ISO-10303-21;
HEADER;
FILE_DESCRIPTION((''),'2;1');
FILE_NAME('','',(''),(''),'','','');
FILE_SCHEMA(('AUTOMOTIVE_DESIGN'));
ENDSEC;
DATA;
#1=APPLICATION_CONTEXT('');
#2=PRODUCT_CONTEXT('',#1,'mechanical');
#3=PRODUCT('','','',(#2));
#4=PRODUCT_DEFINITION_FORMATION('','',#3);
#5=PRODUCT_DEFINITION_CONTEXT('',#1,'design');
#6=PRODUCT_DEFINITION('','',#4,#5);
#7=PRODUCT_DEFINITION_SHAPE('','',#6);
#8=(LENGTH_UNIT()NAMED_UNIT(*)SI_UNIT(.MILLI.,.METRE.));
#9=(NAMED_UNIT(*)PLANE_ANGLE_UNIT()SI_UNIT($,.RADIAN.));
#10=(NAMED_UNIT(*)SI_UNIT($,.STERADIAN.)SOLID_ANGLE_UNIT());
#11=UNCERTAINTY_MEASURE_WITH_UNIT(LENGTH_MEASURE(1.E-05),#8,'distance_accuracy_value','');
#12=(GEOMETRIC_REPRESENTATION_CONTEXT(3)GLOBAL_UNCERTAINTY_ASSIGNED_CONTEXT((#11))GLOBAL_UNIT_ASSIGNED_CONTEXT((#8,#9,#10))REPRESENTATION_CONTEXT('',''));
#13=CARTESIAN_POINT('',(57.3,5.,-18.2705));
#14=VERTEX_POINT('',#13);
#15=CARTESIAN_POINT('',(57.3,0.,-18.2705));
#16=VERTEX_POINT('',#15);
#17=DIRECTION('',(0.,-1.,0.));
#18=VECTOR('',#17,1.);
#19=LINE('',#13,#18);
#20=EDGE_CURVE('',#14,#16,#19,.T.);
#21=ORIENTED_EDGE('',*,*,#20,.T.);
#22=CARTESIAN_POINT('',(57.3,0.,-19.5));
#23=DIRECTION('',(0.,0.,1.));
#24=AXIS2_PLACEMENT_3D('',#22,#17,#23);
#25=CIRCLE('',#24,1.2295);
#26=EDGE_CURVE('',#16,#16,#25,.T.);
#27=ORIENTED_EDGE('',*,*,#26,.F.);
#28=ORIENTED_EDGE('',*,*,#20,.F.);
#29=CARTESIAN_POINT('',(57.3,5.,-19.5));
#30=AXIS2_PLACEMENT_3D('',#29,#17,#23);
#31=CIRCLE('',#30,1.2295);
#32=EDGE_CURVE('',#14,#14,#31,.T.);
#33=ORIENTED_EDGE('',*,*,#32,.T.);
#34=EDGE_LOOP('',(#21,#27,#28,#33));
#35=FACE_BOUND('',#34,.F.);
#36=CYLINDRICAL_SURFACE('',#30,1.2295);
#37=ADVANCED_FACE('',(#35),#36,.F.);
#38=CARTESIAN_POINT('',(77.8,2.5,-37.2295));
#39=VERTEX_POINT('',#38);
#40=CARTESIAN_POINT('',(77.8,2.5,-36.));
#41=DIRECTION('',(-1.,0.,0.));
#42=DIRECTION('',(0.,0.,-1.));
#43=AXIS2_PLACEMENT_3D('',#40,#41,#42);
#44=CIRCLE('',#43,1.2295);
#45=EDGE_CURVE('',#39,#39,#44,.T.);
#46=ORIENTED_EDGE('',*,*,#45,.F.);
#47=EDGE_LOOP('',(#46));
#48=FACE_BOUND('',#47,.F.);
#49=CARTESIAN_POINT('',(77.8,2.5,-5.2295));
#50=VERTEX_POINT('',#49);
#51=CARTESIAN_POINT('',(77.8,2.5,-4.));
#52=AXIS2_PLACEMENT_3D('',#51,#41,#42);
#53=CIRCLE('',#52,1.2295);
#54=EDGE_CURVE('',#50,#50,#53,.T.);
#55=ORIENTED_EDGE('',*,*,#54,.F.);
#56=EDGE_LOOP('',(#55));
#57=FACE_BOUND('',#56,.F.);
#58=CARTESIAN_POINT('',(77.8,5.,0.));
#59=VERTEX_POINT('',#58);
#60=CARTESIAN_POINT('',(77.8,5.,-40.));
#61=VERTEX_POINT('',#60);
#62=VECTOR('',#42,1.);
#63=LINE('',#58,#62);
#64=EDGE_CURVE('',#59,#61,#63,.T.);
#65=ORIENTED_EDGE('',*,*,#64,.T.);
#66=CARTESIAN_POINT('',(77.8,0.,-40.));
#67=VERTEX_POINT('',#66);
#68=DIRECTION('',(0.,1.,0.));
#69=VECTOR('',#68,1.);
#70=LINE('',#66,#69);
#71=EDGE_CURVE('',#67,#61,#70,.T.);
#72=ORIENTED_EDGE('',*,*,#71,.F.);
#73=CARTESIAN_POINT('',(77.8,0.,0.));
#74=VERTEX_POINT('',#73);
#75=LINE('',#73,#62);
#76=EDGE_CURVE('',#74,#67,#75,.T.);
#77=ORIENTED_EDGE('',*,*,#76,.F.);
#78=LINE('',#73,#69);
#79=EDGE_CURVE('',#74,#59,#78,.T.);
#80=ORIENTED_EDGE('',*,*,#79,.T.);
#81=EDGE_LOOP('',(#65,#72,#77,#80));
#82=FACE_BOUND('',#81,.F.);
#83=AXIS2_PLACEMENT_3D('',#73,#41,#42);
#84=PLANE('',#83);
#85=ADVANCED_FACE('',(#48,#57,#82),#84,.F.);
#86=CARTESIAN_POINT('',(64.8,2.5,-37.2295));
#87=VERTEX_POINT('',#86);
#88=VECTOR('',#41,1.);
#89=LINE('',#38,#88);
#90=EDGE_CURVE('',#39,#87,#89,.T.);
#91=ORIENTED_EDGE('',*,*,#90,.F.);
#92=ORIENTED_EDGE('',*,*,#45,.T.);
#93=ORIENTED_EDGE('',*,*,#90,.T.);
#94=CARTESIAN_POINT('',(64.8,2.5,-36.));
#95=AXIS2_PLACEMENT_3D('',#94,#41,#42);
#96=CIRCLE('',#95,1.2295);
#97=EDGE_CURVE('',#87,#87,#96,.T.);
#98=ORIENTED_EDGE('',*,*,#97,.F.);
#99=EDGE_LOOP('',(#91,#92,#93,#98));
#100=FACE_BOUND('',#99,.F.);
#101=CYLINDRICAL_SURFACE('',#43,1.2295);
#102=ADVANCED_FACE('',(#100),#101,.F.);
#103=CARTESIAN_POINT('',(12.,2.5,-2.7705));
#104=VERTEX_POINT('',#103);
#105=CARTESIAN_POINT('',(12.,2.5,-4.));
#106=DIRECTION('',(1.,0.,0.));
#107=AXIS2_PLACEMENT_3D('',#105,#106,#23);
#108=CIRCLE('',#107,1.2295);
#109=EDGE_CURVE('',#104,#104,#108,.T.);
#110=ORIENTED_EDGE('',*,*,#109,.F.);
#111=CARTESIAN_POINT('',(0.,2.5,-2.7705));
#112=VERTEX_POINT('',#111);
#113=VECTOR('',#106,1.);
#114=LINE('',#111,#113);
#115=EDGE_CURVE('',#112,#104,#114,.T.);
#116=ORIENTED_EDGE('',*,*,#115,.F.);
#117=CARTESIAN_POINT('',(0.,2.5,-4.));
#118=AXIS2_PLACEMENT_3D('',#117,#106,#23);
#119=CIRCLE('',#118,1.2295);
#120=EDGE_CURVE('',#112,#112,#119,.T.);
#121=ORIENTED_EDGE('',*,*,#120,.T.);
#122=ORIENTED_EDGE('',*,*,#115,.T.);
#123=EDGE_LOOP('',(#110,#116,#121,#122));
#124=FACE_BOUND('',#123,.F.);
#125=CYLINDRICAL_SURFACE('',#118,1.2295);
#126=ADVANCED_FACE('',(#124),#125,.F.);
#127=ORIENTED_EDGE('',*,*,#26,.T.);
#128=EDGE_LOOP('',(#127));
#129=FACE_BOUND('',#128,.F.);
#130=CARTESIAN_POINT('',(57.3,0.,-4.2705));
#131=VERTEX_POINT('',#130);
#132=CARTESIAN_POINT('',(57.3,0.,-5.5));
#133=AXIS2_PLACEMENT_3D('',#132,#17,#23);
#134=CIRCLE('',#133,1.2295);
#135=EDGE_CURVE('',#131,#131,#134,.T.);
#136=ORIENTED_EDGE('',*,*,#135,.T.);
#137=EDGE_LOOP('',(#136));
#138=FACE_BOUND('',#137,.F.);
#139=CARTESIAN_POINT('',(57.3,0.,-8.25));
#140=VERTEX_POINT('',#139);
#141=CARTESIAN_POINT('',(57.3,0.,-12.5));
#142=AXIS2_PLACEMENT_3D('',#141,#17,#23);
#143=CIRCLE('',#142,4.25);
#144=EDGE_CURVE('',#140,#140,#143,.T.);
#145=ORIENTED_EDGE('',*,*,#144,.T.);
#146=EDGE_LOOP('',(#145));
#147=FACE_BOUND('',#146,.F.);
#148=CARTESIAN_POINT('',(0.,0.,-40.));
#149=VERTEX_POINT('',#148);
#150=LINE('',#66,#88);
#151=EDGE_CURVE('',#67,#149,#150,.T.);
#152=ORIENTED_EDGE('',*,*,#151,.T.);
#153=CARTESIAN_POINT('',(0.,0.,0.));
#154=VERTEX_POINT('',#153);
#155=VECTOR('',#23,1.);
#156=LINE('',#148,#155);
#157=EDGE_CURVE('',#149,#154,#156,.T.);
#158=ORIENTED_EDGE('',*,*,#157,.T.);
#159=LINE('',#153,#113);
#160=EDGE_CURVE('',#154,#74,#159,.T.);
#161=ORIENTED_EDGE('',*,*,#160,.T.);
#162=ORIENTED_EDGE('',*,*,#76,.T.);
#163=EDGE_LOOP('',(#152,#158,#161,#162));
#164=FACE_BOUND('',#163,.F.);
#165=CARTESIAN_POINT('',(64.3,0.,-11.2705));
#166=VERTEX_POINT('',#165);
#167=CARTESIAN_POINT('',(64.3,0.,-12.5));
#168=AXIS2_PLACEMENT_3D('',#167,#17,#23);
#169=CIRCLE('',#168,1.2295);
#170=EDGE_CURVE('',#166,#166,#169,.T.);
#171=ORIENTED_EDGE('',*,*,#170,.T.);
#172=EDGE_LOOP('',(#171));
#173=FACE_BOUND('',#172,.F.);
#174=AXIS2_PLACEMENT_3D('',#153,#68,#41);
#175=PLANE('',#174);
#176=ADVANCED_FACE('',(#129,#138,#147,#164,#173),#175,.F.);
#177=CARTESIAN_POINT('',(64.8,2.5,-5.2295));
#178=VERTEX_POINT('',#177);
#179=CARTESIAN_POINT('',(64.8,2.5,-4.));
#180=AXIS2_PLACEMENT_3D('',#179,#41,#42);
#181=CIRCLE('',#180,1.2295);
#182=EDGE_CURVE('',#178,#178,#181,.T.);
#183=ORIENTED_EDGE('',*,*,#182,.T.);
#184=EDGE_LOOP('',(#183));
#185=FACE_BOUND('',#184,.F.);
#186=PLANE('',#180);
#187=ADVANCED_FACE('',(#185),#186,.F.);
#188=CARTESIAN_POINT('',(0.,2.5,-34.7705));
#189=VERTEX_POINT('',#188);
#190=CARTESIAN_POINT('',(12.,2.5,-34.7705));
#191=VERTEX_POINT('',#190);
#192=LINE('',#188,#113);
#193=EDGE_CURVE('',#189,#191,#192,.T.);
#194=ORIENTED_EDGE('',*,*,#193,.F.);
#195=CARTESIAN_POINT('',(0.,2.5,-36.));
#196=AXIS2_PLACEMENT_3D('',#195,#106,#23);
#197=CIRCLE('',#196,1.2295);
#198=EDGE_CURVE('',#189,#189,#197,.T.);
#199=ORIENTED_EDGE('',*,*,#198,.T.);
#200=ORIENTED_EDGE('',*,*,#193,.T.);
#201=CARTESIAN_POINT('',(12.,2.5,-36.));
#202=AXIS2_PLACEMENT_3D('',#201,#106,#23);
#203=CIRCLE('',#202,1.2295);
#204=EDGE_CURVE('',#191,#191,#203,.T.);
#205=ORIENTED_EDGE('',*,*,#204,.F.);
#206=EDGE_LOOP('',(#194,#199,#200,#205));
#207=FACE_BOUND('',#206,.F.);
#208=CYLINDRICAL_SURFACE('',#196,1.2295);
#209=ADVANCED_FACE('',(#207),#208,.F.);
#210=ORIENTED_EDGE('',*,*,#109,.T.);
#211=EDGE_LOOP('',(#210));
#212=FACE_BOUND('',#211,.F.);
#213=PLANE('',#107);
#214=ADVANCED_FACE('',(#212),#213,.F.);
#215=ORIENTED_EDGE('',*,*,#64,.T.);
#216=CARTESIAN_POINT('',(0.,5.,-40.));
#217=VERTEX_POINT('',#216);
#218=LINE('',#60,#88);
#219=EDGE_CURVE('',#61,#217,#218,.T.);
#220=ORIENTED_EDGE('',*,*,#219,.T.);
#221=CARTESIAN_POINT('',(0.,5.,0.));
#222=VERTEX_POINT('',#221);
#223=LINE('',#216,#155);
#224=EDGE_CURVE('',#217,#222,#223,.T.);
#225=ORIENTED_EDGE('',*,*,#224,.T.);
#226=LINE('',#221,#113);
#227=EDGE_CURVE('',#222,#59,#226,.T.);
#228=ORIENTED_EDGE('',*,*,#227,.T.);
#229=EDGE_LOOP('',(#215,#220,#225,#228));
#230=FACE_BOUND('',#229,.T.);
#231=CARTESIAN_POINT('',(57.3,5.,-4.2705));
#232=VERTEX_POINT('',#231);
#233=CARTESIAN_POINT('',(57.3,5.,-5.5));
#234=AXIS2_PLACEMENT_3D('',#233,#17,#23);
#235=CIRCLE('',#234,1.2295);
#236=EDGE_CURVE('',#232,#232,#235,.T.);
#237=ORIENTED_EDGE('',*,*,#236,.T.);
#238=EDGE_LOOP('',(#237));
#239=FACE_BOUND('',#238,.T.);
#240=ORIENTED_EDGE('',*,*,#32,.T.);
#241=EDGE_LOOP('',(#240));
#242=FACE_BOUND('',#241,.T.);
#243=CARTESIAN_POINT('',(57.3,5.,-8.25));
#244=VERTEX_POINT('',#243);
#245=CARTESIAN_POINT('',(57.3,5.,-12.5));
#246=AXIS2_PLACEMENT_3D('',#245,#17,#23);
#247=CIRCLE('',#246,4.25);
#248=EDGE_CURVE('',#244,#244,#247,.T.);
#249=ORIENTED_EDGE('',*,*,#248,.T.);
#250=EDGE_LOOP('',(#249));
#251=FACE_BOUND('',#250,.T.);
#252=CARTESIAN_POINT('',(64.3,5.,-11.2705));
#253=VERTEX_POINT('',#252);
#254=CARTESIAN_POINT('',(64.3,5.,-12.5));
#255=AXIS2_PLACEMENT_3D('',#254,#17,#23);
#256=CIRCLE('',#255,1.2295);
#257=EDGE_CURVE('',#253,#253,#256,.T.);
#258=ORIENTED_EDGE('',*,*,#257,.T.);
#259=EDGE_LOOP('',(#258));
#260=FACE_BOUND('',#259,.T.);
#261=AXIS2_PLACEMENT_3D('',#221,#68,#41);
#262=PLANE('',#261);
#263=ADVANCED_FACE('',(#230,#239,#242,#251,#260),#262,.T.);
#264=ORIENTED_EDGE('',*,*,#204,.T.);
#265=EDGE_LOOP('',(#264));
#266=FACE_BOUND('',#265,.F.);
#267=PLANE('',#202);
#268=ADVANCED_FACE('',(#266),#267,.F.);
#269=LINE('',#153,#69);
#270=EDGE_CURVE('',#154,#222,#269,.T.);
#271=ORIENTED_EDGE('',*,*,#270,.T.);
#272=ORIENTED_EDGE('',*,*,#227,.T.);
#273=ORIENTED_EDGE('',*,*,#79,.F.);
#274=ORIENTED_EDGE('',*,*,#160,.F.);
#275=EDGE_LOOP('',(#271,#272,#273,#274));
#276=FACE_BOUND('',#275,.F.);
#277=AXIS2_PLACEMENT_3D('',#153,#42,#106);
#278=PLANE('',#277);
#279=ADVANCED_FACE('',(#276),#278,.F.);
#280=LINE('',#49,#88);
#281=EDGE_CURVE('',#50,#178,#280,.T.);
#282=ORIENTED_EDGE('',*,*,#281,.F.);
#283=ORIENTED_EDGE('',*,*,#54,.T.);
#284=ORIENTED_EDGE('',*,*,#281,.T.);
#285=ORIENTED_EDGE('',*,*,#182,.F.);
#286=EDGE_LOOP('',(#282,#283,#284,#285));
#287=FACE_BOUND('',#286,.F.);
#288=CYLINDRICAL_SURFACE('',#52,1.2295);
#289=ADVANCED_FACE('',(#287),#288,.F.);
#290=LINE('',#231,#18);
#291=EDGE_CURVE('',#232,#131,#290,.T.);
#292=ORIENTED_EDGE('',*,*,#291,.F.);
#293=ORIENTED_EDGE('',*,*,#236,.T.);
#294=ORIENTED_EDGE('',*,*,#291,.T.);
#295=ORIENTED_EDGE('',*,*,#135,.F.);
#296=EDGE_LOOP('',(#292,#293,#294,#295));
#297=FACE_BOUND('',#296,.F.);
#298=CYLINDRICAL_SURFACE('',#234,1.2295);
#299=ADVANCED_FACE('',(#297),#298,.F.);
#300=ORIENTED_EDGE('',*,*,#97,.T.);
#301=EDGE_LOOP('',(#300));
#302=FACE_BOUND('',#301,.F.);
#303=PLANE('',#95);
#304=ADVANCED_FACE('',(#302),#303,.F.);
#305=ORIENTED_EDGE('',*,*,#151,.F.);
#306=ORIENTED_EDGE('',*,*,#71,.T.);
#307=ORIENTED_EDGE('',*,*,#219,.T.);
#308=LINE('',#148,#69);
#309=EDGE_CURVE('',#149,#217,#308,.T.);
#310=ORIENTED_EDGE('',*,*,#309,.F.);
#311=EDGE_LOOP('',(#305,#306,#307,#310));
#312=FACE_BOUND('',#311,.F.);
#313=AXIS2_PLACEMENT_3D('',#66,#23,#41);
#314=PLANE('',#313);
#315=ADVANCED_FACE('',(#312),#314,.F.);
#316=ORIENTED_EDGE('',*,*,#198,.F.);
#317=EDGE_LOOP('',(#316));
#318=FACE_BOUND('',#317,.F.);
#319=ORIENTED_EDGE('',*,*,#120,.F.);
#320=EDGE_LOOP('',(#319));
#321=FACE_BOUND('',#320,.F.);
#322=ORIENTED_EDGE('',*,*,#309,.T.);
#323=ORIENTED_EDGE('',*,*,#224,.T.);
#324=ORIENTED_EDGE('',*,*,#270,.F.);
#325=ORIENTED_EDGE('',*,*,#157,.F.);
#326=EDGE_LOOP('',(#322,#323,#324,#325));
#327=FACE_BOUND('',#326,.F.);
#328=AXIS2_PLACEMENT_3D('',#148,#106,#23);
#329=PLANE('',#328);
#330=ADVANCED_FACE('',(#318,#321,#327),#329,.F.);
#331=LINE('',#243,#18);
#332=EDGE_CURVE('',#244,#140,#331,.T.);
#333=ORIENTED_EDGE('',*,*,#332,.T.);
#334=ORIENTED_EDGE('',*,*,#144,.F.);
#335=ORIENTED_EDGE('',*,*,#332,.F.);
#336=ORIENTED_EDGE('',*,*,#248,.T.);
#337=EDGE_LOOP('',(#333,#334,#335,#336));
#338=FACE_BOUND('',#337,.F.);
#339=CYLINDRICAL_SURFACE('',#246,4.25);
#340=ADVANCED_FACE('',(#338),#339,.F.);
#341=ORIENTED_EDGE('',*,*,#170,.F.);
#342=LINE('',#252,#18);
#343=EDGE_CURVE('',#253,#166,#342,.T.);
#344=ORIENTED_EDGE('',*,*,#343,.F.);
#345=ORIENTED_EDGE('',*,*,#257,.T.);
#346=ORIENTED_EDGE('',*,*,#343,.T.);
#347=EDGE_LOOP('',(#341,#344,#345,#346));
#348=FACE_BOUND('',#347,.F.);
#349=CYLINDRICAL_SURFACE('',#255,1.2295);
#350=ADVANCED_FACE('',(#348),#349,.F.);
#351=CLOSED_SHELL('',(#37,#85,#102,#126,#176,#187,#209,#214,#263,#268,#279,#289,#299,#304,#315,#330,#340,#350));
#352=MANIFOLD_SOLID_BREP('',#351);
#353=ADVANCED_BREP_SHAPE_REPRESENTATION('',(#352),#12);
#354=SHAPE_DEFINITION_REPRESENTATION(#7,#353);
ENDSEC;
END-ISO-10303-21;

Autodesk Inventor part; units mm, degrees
ref_plane "YZ Plane" through (0, 0, 0) normal (1, 0, 0) x (0, 1, 0)
ref_plane "XZ Plane" through (0, 0, 0) normal (0, 1, 0) x (-1, 0, 0)
ref_plane "XY Plane" through (0, 0, 0) normal (0, 0, 1) x (1, 0, 0)
sketch "スケッチ2" plane through (0, 0, 0) normal (0, 1, 0) x (-1, 0, 0)
  line L0 (0, 0) -> (-77.8, 0)
  line L1 (-77.8, 0) -> (-77.8, -40)
  line L2 (-77.8, -40) -> (0, -40)
  line L3 (0, -40) -> (0, 0)
  dimension "d0" = 77.8
  dimension "d1" = 40
extrude "押し出し1" add sketch "スケッチ2" along normal blind 5
sketch "スケッチ4" plane through (0, 0, -40) normal (-1, 0, 0) x (0, 0, 1)
  line L0 (0, 0) -> (0, 5) construction
  line L1 (0, 2.5) -> (40, 2.5) construction
  line L2 (40, 0) -> (40, 5) construction
  point P0 (4, 2.5)
  point P1 (36, 2.5)
  dimension "d4" = 4
  dimension "d5" = 4
hole "穴1" at (0, 2.5, -36) at (0, 2.5, -4) direction (1, 0, 0) diameter 2.459 depth 12 thread size "M3x0.5" class "6H" standard "ISO Metric profile"
sketch "スケッチ5" plane through (77.8, 0, 0) normal (1, 0, 0) x (0, 0, -1)
  line L0 (0, 0) -> (0, 5) construction
  line L1 (0, 2.5) -> (39.9198, 2.5) construction
  circle A0 centre (4, 2.5) radius 1.2295 construction
  circle A1 centre (36, 2.5) radius 1.2295 projected
hole "穴2" at (77.8, 2.5, -4) at (77.8, 2.5, -36) direction (-1, 0, 0) diameter 2.459 depth 13 thread size "M3x0.5" class "6H" standard "ISO Metric profile"
sketch "スケッチ6" plane through (0, 5, 0) normal (0, 1, 0) x (1, 0, 0)
  line L0 (77.8, 0) -> (77.8, 40) construction
  line L1 (0, 40) -> (0, 0) construction
  line L2 (0, 0) -> (77.8, 0) construction
  point P0 (57.3, 12.5)
  dimension "d20" = 20.5
  dimension "d21" = 12.5
hole "穴3" at (57.3, 5, -12.5) direction (0, -1, 0) diameter 8.5 end through all
sketch "スケッチ7" plane through (0, 5, 0) normal (0, 1, 0) x (1, 0, 0)
  circle A0 centre (57.3, 12.5) radius 4.25 construction
  circle A1 centre (57.3, 12.5) radius 7 construction
  point P0 (0, 0)
  point P1 (64.3, 12.5)
  point P2 (57.3, 19.5)
  point P3 (57.3, 5.5)
  dimension "d29" = 14
hole "穴4" at (64.3, 5, -12.5) at (57.3, 5, -19.5) at (57.3, 5, -5.5) direction (0, -1, 0) diameter 2.459 end through all thread size "M3x0.5" class "6H" standard "ISO Metric profile"
sketch "スケッチ9" plane through (0, 5, 0) normal (0, 1, 0) x (1, 0, 0)
  circle A0 centre (57.3, 12.5) radius 4.25 construction
  line L0 (57.3, 12.5) -> (44.1485, 12.5) construction
  line L1 (50.05, 13.2) -> (53.05, 13.2)
  line L2 (53.05, 13.2) -> (53.05, 11.8)
  line L3 (53.05, 11.8) -> (50.05, 11.8)
  line L4 (50.05, 11.8) -> (50.05, 13.2)
  line L5 (50.05, 13.2) -> (53.05, 11.8) construction
  line L6 (53.05, 13.2) -> (50.05, 11.8) construction
  line L7 (53.05, 11.8) -> (53.108, 11.8)
  line L8 (53.05, 13.2) -> (53.108, 13.2)
  point P0 (0, 0)
  point P1 (51.55, 12.5)
  dimension "d41" = 3
  dimension "d42" = 1.4
  dimension "d43" = 0
properties part number "shoulder1_verticval_left_cover" material "アルミニウム 5052"
